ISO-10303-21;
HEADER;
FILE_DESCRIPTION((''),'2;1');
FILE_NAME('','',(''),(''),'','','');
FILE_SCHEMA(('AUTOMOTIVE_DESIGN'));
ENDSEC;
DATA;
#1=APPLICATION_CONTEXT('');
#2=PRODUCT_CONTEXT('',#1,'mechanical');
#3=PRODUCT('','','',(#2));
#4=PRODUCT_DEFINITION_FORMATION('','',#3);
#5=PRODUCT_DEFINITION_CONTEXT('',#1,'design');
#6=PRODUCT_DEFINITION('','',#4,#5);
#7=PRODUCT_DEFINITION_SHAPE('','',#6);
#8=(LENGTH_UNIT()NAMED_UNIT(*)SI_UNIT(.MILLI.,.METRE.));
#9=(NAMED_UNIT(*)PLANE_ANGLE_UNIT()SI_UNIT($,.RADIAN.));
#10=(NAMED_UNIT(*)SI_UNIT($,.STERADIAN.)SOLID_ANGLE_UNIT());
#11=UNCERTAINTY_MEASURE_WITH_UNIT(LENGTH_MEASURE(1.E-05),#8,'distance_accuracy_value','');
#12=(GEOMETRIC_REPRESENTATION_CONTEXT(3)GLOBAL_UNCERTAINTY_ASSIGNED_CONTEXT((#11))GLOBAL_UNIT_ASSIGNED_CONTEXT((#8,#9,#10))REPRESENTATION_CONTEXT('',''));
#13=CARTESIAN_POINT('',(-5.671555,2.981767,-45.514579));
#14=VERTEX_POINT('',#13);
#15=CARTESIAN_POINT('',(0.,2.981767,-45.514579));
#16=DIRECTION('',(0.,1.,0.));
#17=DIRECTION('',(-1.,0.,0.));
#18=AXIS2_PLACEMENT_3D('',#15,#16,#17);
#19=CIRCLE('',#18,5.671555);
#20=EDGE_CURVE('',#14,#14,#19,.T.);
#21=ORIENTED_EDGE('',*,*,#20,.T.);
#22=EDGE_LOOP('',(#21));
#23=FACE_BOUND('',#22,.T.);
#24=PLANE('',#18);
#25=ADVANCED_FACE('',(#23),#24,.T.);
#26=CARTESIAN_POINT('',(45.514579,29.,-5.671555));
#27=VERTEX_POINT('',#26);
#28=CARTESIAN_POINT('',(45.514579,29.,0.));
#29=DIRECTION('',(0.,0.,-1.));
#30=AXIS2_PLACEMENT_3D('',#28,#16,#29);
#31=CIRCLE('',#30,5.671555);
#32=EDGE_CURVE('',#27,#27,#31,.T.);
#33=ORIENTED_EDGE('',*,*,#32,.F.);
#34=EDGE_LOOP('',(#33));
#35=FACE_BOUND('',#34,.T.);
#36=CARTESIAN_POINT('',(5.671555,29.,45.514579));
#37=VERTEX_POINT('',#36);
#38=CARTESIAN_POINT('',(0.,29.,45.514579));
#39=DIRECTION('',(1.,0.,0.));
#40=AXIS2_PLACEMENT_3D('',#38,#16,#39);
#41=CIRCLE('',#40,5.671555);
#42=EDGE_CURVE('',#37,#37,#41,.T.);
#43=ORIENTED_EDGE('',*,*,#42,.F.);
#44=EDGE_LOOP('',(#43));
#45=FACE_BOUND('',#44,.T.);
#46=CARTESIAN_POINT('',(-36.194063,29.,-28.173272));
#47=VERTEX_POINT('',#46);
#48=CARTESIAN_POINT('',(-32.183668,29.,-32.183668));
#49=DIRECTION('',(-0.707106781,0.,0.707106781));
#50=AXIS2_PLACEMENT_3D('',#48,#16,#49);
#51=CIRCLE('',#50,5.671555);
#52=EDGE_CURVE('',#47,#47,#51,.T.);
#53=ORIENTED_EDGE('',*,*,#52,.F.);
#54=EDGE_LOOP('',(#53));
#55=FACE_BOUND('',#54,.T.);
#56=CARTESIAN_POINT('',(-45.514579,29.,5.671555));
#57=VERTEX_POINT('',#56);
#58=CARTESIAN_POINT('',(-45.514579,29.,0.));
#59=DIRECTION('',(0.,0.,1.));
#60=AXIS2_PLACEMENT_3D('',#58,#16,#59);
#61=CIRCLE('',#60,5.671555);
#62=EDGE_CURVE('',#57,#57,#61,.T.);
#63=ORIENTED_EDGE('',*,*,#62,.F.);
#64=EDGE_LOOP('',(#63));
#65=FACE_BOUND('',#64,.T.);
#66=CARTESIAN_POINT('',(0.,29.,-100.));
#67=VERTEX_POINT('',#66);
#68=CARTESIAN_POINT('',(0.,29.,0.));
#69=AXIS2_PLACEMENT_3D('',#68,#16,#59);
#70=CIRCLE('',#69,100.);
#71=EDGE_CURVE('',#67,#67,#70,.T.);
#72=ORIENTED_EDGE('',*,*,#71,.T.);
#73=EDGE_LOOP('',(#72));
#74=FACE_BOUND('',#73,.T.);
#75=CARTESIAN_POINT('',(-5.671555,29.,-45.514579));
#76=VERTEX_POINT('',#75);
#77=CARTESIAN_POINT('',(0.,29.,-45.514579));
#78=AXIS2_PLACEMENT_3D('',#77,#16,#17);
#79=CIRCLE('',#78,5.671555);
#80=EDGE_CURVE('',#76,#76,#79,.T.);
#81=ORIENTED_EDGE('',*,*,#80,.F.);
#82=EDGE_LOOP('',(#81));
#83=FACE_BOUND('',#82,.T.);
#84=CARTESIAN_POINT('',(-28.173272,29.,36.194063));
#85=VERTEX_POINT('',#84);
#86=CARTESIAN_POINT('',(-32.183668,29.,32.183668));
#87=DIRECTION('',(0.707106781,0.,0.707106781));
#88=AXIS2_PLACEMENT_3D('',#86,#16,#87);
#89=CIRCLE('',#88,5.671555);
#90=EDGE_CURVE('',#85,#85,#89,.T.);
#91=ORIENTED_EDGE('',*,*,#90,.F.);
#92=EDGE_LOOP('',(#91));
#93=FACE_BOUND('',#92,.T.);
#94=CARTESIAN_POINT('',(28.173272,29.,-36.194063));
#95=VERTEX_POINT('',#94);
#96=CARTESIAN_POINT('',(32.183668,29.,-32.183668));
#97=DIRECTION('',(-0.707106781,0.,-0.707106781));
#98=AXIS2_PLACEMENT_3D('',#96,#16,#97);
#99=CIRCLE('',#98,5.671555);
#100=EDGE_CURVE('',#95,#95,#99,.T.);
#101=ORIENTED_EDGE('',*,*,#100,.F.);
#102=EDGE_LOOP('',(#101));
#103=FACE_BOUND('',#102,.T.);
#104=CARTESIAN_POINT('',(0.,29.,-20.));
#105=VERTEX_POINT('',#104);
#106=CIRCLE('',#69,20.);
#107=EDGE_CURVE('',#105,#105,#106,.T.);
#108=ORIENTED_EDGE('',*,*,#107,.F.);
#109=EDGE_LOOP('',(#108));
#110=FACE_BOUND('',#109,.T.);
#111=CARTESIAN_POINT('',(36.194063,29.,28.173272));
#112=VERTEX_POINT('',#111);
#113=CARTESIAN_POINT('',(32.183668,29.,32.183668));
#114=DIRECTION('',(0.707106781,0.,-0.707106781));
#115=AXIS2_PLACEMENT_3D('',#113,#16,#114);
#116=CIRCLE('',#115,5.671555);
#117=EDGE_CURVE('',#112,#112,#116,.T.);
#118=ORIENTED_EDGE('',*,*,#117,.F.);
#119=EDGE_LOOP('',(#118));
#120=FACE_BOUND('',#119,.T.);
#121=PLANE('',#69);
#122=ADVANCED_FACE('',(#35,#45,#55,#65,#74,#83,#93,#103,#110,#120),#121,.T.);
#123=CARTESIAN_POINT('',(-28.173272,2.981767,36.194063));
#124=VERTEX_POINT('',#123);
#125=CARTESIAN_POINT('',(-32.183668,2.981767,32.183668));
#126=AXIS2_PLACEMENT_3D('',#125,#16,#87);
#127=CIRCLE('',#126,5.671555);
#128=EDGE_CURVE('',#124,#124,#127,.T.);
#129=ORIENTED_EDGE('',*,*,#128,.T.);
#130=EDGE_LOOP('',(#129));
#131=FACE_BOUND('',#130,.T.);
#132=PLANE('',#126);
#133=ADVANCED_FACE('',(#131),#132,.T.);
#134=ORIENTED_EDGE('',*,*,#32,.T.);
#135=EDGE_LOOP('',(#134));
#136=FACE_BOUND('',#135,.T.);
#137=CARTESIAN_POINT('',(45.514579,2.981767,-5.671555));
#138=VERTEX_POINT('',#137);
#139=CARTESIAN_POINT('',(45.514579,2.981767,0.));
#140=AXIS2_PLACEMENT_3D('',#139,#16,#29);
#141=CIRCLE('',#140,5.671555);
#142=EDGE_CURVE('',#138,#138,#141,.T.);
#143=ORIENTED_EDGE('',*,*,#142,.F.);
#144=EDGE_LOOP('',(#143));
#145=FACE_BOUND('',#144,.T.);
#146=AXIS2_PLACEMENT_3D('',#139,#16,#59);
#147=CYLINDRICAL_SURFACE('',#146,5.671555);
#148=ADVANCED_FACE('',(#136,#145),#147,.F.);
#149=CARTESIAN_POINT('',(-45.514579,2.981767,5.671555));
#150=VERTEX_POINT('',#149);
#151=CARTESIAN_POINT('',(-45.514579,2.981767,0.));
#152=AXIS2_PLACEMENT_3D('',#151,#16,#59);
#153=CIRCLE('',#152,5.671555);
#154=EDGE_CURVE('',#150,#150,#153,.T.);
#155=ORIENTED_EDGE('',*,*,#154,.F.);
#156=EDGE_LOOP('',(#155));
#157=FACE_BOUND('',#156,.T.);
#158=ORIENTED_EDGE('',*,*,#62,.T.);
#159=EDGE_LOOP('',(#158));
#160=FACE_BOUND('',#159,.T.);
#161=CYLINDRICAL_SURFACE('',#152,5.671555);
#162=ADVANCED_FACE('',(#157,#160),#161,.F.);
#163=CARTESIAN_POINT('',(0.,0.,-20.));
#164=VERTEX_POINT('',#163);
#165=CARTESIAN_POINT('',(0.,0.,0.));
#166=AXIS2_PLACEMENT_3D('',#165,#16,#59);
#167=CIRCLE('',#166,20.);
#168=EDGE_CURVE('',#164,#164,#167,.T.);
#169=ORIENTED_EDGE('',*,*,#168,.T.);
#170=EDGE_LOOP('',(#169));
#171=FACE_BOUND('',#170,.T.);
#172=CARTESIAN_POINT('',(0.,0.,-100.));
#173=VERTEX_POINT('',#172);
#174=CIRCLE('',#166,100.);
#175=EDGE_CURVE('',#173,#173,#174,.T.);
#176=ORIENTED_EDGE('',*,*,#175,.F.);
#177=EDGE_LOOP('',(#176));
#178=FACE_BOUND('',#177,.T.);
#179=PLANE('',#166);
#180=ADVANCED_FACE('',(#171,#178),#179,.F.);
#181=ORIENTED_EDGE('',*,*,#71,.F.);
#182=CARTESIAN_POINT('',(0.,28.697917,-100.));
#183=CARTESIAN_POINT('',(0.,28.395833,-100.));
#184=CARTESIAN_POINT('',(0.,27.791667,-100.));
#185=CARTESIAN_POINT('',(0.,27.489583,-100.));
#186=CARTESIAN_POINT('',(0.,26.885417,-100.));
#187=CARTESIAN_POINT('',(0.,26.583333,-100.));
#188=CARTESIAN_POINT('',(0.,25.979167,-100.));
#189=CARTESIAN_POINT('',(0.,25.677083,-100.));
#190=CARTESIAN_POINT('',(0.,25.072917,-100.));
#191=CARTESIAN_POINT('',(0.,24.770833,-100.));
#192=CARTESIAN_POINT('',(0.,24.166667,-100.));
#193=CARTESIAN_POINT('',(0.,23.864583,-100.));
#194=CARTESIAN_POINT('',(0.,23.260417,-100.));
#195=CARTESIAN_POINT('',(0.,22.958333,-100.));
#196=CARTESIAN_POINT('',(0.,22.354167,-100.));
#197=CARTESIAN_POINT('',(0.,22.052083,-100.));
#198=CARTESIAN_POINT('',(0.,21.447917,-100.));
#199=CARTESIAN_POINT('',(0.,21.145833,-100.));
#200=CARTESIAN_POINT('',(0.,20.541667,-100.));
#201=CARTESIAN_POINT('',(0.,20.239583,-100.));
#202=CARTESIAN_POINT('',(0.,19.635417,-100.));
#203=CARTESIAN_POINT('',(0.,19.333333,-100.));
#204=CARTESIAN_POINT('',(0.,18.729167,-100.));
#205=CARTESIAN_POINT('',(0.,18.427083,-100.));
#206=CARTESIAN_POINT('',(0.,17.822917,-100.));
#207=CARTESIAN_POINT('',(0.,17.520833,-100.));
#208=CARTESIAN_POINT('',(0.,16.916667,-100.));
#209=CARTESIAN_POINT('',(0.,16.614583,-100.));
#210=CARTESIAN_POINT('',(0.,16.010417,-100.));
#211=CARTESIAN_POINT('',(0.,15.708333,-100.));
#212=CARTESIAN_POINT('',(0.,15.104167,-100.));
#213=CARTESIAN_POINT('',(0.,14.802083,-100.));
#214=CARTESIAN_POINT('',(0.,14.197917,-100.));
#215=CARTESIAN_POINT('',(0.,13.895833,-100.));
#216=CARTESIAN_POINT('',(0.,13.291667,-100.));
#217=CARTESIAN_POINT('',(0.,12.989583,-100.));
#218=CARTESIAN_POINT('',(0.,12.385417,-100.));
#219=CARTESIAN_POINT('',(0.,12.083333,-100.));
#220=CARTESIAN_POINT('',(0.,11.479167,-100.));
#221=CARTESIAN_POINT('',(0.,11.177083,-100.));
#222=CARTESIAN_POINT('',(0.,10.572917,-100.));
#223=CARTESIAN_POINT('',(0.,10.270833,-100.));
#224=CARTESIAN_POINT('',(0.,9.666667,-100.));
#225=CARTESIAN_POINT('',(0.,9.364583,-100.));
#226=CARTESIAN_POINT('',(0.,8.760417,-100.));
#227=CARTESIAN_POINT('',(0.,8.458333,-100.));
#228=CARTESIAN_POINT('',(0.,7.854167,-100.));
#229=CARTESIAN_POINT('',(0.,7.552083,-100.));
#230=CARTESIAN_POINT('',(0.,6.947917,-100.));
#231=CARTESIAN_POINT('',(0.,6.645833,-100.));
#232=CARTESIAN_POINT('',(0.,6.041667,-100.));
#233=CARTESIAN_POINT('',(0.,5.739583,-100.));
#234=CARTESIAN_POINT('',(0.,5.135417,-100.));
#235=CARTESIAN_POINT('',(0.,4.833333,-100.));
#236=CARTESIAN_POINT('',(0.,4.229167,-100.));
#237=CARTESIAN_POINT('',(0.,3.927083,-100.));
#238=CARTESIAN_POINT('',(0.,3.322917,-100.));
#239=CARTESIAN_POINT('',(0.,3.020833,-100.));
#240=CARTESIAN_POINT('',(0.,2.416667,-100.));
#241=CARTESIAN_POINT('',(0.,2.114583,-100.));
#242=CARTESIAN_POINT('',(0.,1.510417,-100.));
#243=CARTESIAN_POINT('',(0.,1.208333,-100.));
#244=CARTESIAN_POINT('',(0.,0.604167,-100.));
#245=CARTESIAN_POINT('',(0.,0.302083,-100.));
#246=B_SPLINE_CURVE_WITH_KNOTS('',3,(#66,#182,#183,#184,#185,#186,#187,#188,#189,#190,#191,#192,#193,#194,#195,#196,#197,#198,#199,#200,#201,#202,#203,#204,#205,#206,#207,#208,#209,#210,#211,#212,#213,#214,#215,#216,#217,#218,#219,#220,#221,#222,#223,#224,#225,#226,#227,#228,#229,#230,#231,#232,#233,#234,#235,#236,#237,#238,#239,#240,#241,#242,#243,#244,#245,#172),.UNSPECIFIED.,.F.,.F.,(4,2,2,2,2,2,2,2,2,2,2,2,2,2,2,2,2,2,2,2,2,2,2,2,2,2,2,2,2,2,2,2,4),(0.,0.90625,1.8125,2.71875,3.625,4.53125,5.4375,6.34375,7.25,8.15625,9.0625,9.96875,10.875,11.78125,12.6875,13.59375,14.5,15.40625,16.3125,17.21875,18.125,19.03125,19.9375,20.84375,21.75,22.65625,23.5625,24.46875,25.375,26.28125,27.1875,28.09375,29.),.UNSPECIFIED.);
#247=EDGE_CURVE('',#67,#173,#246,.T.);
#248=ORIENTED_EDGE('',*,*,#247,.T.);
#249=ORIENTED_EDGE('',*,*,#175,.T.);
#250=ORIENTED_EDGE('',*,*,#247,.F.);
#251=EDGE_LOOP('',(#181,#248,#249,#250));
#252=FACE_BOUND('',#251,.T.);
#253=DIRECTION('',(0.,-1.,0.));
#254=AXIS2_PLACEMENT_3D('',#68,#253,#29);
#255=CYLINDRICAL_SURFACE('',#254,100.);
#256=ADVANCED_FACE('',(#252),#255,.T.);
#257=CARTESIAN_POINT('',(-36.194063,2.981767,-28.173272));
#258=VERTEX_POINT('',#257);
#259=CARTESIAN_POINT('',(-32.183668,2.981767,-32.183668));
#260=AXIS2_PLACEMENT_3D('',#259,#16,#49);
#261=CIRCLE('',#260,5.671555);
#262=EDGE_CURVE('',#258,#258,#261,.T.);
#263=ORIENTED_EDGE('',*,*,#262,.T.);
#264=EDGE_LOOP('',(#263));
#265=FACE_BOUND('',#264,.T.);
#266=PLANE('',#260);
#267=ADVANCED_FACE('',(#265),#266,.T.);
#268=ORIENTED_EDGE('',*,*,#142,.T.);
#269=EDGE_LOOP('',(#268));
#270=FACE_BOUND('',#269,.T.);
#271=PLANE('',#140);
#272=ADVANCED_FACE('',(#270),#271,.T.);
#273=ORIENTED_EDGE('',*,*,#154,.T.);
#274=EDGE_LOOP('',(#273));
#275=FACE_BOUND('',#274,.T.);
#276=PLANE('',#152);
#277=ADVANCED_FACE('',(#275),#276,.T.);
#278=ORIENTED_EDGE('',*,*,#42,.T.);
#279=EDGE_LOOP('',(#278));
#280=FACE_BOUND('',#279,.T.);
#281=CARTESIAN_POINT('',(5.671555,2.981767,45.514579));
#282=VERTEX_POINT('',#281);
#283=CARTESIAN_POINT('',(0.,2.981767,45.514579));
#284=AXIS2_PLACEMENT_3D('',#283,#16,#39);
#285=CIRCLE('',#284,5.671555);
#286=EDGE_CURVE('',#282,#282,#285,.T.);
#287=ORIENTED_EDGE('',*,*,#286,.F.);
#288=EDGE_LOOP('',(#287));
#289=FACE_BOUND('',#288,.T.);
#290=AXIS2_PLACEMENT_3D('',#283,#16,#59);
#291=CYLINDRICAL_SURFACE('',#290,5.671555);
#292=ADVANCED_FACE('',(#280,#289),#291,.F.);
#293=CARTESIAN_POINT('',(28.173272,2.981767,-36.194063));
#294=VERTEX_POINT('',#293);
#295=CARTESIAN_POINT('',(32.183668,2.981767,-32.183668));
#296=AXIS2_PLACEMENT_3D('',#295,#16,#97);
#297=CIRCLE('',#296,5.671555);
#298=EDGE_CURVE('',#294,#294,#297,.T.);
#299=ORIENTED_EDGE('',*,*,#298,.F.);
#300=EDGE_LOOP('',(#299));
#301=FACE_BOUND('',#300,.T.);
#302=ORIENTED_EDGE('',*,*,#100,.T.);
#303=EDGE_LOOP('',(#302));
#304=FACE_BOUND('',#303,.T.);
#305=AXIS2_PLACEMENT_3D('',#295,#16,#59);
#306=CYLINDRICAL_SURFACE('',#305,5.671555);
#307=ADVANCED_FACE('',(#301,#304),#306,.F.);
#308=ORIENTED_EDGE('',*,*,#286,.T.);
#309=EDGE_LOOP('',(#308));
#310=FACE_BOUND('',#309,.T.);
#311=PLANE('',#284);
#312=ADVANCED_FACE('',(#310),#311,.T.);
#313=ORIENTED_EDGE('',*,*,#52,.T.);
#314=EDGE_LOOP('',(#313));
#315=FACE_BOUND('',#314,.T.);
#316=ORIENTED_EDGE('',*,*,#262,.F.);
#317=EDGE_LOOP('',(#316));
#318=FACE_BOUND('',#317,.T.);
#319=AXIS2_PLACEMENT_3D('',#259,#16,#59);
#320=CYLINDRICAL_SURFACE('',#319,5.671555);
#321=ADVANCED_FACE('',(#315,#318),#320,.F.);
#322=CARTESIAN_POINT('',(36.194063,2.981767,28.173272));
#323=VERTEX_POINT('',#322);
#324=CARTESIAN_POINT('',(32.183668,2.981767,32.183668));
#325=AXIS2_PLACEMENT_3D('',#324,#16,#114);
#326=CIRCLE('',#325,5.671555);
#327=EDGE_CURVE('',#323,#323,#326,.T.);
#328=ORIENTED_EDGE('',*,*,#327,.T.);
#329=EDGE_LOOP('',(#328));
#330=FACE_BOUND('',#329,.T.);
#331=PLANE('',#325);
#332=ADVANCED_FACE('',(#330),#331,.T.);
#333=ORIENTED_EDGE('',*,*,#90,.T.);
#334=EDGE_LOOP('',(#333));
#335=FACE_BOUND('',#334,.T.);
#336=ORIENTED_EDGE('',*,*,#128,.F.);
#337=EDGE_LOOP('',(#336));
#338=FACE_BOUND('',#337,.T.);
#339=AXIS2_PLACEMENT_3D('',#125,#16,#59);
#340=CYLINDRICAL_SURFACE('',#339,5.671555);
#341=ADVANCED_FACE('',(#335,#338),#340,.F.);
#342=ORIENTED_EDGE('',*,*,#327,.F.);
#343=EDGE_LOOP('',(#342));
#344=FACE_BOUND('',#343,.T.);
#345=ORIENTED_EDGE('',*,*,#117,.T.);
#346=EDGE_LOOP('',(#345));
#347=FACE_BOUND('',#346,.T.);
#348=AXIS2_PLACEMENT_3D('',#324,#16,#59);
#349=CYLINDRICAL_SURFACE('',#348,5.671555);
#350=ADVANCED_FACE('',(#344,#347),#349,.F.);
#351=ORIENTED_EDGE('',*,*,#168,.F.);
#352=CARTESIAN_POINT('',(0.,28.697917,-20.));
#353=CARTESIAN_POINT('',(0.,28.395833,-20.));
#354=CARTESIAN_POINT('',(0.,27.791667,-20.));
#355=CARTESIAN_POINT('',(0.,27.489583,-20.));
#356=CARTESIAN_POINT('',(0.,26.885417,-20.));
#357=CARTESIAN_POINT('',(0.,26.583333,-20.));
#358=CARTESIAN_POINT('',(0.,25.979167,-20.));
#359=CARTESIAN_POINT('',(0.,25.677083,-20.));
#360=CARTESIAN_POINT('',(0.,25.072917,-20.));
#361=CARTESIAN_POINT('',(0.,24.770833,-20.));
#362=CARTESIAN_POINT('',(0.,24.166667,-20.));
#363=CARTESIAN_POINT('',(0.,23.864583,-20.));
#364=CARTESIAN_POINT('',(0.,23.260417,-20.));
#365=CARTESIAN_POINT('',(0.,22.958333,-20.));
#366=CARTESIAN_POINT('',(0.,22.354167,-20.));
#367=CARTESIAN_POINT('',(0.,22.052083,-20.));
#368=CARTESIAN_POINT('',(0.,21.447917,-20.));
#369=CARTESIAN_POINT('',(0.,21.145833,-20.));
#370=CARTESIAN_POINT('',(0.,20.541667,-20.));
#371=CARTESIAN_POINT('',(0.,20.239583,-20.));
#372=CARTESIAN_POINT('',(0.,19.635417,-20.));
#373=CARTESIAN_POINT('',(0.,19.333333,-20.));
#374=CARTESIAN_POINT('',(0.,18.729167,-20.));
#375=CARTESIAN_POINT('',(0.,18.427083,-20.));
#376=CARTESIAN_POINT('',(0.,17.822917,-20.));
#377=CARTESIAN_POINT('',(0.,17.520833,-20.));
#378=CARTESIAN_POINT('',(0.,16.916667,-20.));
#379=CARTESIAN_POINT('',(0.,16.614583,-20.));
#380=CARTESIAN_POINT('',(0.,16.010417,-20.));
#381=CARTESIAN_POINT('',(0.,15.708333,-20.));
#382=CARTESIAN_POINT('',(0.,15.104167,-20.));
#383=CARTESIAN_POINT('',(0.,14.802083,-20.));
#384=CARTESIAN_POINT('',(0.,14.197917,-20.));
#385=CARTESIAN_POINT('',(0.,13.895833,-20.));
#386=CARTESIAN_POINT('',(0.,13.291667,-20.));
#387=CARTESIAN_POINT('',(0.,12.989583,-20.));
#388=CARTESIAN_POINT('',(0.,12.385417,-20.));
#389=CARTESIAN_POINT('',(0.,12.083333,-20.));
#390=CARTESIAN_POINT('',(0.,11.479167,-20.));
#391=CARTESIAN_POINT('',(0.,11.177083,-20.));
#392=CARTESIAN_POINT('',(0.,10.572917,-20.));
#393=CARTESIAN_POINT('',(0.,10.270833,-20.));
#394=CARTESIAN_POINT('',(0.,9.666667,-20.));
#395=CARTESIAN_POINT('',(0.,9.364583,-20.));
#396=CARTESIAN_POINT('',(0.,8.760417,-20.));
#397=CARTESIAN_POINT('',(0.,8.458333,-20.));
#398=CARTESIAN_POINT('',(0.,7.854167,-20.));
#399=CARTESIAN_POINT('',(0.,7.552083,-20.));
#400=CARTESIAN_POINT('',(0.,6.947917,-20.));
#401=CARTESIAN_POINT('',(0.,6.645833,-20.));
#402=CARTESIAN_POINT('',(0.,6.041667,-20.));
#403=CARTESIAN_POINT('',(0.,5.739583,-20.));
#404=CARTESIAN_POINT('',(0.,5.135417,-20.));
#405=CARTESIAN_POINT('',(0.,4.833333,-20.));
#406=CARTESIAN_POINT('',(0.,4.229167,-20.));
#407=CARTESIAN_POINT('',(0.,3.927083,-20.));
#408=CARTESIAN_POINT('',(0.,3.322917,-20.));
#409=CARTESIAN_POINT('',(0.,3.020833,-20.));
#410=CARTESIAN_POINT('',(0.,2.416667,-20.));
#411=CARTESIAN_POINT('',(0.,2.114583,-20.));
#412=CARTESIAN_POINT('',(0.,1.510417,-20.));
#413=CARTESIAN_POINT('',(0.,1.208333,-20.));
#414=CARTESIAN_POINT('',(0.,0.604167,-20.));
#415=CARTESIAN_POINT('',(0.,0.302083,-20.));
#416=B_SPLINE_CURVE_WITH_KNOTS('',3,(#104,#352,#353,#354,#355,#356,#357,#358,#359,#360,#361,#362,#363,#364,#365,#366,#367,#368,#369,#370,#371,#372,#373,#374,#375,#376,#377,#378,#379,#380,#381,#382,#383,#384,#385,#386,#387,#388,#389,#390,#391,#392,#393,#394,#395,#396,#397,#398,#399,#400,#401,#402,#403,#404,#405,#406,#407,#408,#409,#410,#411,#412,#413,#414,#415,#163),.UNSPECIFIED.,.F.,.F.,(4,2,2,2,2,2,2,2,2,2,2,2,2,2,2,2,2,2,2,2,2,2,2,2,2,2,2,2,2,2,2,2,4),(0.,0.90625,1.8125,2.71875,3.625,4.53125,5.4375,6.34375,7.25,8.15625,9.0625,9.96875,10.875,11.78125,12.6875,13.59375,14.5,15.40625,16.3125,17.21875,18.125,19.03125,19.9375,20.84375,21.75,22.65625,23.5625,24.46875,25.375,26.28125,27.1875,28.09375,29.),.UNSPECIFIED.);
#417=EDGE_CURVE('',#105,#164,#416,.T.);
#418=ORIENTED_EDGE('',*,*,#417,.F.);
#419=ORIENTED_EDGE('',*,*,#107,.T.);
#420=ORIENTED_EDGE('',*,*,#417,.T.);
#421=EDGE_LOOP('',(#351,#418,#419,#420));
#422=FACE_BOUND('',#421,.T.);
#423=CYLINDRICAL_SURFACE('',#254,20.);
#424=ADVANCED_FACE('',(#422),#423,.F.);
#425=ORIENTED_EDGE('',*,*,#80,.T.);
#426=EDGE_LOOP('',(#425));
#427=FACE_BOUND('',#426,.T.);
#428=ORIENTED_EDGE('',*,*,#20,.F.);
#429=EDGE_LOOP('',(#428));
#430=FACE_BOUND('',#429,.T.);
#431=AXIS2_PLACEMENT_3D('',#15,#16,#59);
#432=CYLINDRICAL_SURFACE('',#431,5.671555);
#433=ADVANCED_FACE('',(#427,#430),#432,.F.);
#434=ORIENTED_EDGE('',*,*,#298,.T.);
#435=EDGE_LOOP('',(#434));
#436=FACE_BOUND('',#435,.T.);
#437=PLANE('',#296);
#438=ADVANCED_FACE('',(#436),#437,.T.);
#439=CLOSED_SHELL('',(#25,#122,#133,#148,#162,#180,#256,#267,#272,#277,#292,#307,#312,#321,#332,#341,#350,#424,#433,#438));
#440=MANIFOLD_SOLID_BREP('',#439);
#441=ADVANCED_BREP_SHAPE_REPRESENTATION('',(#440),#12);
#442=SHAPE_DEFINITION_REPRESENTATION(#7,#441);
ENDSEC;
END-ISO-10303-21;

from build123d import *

# Parameters (mm, degrees)
SKETCH1_R           = 100
BOSS_EXTRUDE1_DEPTH = 29
SKETCH2_R           = 20
CUT_EXTRUDE1_DEPTH  = 145.364122967
SKETCH3_R           = 5.671555205
CUT_EXTRUDE2_DEPTH  = 26.018232772
CIRPATTERN1_COUNT   = 8


with BuildPart() as part:
    # Sketch1 → Boss-Extrude1 (new body)
    with BuildSketch(Plane(origin=(0, 0, 0), x_dir=(1, 0, 0), z_dir=(0, 1, 0))):
        Circle(SKETCH1_R)
    extrude(amount=BOSS_EXTRUDE1_DEPTH)

    # Sketch2 → Cut-Extrude1 (cut, through all)
    with BuildSketch(Plane(origin=(0, 0, 0), x_dir=(1, 0, 0), z_dir=(0, 1, 0))):
        Circle(SKETCH2_R)
    extrude(amount=CUT_EXTRUDE1_DEPTH, mode=Mode.SUBTRACT)

    # Sketch3 → Cut-Extrude2 (cut)
    with BuildSketch(Plane(origin=(0, 29, 0), x_dir=(1, 0, 0), z_dir=(0, 1, 0))):
        with Locations((-45.514579241, 0)):
            Circle(SKETCH3_R)
    cut_extrude2 = extrude(amount=-CUT_EXTRUDE2_DEPTH, mode=Mode.SUBTRACT)

    # CirPattern1: Cut-Extrude2 ×8 about axis
    cirpattern1_axis = Axis((0, 0, 0), (0, 1, 0))
    for i in range(1, CIRPATTERN1_COUNT):
        add(cut_extrude2.rotate(cirpattern1_axis, i * 360 / CIRPATTERN1_COUNT), mode=Mode.SUBTRACT)


solid = part.part
